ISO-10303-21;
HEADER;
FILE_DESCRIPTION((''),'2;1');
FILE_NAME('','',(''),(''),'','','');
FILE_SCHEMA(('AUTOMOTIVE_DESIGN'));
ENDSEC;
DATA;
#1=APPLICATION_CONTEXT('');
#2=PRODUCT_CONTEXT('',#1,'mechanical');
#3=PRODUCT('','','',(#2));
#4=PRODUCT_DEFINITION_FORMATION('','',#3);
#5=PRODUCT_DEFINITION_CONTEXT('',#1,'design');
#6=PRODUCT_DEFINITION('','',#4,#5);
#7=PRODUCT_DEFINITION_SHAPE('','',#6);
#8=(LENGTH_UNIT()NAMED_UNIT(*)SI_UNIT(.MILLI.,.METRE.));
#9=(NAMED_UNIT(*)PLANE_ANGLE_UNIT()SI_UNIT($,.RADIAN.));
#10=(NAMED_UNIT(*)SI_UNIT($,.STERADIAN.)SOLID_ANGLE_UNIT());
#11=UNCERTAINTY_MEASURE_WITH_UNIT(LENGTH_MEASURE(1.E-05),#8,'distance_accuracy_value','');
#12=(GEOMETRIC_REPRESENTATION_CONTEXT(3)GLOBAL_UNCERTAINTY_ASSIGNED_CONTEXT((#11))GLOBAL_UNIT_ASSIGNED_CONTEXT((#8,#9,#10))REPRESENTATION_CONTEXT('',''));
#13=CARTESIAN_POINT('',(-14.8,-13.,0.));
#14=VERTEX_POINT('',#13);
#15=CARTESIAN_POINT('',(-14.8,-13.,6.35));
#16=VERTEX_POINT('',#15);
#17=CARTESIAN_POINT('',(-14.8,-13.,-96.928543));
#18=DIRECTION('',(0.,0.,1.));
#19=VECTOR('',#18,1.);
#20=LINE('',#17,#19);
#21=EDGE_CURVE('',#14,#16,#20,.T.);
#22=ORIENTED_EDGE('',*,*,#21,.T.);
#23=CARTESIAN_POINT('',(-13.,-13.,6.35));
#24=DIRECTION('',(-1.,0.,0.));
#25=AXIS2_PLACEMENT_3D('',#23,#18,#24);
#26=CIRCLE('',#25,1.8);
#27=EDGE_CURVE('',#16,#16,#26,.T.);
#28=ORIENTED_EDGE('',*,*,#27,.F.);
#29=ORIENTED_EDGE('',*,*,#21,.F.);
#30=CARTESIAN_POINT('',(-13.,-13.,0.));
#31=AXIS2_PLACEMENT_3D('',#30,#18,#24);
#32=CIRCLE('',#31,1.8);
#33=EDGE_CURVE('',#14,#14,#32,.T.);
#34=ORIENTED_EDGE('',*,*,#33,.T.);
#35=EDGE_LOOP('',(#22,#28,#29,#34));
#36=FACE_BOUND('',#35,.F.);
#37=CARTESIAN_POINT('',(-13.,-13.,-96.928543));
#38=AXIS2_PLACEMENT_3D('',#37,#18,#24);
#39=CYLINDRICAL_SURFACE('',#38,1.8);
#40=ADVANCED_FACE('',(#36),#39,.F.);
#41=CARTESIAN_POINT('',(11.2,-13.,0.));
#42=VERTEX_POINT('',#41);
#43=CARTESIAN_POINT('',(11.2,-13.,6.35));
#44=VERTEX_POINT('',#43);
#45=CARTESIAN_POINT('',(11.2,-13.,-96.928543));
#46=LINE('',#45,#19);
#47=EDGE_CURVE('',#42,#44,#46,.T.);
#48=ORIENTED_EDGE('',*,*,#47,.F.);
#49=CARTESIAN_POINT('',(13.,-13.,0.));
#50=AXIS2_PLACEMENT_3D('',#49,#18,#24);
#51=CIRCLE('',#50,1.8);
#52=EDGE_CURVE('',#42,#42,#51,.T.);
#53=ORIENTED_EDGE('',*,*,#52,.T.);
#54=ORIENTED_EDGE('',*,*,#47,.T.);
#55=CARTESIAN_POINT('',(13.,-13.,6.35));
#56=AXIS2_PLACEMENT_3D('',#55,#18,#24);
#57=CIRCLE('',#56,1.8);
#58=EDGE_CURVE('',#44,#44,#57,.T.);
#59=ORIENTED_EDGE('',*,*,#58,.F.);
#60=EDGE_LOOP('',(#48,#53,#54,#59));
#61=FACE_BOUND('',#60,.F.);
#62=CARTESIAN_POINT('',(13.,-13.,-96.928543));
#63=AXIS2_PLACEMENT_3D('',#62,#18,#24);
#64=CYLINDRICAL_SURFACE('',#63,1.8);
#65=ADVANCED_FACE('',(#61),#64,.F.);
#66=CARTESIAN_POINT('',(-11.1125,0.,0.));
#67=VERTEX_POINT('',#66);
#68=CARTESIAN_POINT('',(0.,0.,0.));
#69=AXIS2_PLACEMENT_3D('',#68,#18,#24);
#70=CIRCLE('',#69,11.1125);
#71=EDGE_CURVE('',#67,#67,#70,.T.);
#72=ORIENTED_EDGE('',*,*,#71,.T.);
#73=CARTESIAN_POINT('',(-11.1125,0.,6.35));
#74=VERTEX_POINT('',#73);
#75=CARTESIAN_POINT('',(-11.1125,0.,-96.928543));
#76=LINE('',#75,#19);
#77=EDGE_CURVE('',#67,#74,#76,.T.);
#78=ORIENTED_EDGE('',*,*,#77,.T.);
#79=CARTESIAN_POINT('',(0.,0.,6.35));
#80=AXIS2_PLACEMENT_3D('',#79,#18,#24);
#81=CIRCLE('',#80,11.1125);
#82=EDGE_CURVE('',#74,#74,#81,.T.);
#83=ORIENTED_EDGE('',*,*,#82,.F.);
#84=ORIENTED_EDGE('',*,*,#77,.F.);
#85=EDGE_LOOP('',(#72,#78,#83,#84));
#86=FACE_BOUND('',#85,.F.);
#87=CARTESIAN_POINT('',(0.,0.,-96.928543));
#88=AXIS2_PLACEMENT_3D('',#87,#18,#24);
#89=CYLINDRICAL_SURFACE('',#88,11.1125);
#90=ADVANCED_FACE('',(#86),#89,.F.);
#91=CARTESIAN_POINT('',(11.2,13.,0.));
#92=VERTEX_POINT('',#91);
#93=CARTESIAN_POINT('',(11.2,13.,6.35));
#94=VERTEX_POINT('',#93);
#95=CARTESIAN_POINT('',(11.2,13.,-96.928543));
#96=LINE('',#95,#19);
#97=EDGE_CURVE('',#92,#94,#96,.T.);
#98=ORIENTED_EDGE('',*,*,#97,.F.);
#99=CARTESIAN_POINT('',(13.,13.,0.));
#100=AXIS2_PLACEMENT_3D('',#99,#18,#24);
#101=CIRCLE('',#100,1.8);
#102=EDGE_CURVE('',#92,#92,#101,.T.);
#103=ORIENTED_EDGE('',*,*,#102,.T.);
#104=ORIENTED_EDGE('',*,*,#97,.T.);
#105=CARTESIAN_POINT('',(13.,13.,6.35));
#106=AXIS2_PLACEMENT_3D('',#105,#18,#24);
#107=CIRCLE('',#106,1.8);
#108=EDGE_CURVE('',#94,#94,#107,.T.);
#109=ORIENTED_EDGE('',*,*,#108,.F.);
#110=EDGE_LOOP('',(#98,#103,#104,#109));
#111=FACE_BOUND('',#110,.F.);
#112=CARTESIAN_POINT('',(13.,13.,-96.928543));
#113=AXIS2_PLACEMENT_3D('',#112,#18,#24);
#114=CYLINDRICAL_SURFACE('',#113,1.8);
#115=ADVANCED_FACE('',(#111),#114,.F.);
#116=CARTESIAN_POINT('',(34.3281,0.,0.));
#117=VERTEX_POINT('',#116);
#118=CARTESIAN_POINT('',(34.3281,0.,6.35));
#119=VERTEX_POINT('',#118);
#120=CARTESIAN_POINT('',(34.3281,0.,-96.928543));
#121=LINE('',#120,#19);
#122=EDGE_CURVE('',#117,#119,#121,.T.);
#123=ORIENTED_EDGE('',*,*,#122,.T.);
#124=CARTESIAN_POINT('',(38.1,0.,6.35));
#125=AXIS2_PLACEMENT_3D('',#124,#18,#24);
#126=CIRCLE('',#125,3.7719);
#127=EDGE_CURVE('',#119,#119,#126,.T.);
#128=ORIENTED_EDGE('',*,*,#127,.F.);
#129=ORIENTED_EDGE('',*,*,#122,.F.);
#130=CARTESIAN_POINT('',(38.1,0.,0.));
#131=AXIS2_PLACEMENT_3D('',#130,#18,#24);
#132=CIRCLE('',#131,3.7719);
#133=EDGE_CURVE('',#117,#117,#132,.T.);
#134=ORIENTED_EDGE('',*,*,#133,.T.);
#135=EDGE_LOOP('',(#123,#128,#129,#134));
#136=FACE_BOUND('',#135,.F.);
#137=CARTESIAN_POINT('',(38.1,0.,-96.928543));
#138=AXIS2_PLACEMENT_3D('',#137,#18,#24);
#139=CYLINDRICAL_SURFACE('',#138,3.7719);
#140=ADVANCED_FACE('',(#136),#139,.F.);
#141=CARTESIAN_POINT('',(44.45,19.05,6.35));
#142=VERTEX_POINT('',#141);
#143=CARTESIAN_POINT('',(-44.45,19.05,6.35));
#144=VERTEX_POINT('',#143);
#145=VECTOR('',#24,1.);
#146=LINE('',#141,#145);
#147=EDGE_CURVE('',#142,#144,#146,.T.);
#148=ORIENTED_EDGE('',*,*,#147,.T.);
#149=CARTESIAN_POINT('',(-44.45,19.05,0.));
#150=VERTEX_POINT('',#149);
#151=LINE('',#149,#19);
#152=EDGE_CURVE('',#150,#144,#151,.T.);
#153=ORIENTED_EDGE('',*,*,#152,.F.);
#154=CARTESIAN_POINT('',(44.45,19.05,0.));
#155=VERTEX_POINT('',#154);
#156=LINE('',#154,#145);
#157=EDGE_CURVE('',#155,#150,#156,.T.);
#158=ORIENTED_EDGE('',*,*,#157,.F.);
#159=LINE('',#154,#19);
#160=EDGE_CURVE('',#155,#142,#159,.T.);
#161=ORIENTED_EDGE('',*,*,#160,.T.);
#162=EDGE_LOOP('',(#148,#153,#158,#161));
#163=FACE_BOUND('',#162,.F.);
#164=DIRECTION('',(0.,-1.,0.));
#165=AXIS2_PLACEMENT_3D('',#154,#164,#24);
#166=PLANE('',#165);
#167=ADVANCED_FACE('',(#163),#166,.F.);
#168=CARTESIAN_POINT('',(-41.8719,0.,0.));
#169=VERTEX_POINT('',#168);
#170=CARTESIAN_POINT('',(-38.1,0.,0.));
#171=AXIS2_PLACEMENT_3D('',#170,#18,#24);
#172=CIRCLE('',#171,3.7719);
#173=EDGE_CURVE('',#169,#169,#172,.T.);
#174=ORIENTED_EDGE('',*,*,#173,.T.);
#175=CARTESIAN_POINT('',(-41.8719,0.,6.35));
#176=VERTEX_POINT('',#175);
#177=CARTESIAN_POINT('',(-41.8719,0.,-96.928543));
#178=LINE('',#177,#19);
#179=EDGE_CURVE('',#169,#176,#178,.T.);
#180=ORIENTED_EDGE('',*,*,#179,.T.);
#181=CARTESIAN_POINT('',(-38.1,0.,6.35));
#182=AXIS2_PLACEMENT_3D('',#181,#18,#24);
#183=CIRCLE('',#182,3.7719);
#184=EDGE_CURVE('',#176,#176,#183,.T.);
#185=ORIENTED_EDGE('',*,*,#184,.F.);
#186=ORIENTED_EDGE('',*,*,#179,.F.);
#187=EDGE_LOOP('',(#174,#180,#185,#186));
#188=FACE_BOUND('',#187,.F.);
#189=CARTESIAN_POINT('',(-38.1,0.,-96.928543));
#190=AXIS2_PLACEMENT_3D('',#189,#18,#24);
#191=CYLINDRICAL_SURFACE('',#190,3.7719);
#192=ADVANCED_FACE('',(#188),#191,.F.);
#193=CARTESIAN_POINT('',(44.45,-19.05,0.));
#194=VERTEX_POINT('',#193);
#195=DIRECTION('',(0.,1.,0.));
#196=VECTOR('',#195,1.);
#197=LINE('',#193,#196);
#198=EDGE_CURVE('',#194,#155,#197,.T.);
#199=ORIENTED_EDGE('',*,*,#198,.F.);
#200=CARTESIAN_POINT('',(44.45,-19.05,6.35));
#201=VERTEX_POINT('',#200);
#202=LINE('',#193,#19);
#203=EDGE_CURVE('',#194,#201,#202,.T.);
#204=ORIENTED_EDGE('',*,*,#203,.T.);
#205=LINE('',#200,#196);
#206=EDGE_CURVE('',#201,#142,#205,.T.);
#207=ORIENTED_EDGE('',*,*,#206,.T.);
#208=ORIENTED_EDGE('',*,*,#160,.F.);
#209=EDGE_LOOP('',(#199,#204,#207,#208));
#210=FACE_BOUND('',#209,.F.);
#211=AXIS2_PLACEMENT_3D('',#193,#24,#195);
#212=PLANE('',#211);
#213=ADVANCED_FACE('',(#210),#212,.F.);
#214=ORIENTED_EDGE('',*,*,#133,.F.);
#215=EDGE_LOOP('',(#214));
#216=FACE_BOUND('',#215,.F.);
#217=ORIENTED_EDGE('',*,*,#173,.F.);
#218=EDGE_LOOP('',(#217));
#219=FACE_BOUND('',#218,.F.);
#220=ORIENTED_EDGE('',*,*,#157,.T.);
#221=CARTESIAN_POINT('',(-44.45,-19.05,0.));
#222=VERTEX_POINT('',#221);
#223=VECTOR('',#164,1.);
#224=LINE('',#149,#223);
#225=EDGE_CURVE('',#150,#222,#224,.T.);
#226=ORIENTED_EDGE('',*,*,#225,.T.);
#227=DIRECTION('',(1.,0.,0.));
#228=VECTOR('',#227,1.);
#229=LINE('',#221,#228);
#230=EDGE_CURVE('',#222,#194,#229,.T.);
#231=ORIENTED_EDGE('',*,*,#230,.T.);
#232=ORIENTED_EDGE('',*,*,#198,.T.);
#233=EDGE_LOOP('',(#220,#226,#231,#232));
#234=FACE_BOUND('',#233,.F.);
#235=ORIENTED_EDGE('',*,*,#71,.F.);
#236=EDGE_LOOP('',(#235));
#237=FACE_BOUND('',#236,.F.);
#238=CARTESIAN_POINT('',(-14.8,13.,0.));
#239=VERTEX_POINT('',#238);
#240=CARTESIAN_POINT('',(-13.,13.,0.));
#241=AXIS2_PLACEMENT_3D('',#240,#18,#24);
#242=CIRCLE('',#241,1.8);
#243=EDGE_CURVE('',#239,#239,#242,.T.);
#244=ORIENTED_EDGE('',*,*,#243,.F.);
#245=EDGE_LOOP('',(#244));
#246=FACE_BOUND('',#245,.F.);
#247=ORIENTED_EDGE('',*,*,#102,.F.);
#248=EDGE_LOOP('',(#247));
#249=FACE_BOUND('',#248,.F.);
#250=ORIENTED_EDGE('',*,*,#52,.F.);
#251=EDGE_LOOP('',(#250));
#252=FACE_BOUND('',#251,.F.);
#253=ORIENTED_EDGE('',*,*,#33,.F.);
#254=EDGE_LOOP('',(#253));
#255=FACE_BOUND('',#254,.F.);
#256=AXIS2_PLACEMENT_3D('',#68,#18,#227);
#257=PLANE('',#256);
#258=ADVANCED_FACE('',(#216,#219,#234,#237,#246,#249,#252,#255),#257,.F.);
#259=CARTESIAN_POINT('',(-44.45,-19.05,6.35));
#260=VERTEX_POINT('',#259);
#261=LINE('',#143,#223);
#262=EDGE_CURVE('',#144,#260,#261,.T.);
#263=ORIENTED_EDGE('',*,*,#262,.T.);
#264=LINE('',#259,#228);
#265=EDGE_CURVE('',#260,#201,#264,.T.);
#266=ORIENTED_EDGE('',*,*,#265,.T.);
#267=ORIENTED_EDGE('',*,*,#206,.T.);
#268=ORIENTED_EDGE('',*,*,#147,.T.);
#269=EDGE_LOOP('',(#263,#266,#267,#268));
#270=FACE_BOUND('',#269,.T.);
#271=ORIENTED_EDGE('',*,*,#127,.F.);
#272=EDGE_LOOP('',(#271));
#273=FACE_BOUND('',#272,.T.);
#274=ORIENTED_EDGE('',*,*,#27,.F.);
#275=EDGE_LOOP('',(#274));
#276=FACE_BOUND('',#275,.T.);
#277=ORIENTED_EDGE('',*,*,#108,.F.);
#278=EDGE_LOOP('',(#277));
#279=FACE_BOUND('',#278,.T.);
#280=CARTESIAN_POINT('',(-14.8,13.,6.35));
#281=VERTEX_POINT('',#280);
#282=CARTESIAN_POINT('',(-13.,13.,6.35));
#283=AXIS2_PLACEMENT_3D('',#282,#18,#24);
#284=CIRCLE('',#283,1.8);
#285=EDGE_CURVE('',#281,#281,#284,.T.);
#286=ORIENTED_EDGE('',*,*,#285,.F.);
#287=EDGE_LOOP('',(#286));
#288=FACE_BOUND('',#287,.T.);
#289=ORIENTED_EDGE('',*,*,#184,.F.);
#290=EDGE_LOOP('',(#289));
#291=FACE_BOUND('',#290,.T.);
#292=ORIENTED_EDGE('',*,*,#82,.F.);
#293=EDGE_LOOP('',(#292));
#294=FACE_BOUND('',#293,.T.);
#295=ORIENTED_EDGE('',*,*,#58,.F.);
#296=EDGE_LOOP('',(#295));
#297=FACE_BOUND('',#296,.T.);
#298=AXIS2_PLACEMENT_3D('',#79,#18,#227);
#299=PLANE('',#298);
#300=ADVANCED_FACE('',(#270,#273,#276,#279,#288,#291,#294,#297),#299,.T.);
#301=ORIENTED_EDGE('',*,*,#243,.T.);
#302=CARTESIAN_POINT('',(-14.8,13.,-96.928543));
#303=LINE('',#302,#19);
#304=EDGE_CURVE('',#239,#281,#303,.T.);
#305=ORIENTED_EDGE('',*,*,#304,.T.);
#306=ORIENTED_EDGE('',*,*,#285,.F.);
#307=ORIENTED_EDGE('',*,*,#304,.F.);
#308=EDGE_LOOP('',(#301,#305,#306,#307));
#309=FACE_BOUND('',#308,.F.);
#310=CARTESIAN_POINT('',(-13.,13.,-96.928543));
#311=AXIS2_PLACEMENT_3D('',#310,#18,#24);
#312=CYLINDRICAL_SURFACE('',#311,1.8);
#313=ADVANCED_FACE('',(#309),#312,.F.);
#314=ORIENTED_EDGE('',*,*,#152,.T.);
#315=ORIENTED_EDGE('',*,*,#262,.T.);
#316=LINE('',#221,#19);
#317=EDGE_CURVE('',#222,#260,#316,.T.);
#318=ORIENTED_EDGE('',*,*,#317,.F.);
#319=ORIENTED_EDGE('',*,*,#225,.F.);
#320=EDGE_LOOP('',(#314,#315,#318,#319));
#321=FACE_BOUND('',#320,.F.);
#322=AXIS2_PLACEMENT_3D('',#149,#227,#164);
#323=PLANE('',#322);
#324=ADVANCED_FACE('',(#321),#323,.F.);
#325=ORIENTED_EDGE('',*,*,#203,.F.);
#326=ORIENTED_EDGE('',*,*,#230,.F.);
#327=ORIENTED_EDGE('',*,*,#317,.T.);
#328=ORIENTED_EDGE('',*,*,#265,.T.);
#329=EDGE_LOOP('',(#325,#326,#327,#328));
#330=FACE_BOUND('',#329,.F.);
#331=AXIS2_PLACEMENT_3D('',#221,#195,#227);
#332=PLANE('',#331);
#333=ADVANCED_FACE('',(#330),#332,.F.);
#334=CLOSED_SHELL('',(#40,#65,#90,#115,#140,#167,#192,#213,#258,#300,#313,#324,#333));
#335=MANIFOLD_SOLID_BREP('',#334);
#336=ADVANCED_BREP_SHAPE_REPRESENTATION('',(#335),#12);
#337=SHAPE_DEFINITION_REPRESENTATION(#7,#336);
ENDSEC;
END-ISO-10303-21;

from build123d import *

# Parameters (mm, degrees)
F1_DEPTH = 6.35
F2_D     = 3.6
F3_D     = 7.5438
F4_D     = 22.225


# Not quite as in the source:
# - a length typed as a fraction of an inch, garbled in the dataset ("3 / 203.2 mm" for 3/8 in), is restored


with BuildPart() as f1:
    # F0 (on Top) → F1 (new body)
    with BuildSketch(Plane.XY):
        Polygon((44.45, 13), (44.45, 19.05), (-44.45, 19.05), (-44.45, -19.05), (44.45, -19.05), align=None)
    extrude(amount=F1_DEPTH)

    # F2 (through all)
    with Locations(Plane(origin=(0, 0, 0), x_dir=(1, 0, 0), z_dir=(0, 0, -1))):
        with Locations((-13, -13), (13, -13), (13, 13), (-13, 13)):
            Hole(F2_D / 2)

    # F3 (through all)
    with Locations(Plane(origin=(0, 0, 0), x_dir=(1, 0, 0), z_dir=(0, 0, -1))):
        with Locations((-38.1, 0), (38.1, 0)):
            Hole(F3_D / 2)

    # F4 (through all)
    with Locations(Plane(origin=(0, 0, 0), x_dir=(1, 0, 0), z_dir=(0, 0, -1))):
        with Locations((0, 0)):
            Hole(F4_D / 2)


solid = f1.part
